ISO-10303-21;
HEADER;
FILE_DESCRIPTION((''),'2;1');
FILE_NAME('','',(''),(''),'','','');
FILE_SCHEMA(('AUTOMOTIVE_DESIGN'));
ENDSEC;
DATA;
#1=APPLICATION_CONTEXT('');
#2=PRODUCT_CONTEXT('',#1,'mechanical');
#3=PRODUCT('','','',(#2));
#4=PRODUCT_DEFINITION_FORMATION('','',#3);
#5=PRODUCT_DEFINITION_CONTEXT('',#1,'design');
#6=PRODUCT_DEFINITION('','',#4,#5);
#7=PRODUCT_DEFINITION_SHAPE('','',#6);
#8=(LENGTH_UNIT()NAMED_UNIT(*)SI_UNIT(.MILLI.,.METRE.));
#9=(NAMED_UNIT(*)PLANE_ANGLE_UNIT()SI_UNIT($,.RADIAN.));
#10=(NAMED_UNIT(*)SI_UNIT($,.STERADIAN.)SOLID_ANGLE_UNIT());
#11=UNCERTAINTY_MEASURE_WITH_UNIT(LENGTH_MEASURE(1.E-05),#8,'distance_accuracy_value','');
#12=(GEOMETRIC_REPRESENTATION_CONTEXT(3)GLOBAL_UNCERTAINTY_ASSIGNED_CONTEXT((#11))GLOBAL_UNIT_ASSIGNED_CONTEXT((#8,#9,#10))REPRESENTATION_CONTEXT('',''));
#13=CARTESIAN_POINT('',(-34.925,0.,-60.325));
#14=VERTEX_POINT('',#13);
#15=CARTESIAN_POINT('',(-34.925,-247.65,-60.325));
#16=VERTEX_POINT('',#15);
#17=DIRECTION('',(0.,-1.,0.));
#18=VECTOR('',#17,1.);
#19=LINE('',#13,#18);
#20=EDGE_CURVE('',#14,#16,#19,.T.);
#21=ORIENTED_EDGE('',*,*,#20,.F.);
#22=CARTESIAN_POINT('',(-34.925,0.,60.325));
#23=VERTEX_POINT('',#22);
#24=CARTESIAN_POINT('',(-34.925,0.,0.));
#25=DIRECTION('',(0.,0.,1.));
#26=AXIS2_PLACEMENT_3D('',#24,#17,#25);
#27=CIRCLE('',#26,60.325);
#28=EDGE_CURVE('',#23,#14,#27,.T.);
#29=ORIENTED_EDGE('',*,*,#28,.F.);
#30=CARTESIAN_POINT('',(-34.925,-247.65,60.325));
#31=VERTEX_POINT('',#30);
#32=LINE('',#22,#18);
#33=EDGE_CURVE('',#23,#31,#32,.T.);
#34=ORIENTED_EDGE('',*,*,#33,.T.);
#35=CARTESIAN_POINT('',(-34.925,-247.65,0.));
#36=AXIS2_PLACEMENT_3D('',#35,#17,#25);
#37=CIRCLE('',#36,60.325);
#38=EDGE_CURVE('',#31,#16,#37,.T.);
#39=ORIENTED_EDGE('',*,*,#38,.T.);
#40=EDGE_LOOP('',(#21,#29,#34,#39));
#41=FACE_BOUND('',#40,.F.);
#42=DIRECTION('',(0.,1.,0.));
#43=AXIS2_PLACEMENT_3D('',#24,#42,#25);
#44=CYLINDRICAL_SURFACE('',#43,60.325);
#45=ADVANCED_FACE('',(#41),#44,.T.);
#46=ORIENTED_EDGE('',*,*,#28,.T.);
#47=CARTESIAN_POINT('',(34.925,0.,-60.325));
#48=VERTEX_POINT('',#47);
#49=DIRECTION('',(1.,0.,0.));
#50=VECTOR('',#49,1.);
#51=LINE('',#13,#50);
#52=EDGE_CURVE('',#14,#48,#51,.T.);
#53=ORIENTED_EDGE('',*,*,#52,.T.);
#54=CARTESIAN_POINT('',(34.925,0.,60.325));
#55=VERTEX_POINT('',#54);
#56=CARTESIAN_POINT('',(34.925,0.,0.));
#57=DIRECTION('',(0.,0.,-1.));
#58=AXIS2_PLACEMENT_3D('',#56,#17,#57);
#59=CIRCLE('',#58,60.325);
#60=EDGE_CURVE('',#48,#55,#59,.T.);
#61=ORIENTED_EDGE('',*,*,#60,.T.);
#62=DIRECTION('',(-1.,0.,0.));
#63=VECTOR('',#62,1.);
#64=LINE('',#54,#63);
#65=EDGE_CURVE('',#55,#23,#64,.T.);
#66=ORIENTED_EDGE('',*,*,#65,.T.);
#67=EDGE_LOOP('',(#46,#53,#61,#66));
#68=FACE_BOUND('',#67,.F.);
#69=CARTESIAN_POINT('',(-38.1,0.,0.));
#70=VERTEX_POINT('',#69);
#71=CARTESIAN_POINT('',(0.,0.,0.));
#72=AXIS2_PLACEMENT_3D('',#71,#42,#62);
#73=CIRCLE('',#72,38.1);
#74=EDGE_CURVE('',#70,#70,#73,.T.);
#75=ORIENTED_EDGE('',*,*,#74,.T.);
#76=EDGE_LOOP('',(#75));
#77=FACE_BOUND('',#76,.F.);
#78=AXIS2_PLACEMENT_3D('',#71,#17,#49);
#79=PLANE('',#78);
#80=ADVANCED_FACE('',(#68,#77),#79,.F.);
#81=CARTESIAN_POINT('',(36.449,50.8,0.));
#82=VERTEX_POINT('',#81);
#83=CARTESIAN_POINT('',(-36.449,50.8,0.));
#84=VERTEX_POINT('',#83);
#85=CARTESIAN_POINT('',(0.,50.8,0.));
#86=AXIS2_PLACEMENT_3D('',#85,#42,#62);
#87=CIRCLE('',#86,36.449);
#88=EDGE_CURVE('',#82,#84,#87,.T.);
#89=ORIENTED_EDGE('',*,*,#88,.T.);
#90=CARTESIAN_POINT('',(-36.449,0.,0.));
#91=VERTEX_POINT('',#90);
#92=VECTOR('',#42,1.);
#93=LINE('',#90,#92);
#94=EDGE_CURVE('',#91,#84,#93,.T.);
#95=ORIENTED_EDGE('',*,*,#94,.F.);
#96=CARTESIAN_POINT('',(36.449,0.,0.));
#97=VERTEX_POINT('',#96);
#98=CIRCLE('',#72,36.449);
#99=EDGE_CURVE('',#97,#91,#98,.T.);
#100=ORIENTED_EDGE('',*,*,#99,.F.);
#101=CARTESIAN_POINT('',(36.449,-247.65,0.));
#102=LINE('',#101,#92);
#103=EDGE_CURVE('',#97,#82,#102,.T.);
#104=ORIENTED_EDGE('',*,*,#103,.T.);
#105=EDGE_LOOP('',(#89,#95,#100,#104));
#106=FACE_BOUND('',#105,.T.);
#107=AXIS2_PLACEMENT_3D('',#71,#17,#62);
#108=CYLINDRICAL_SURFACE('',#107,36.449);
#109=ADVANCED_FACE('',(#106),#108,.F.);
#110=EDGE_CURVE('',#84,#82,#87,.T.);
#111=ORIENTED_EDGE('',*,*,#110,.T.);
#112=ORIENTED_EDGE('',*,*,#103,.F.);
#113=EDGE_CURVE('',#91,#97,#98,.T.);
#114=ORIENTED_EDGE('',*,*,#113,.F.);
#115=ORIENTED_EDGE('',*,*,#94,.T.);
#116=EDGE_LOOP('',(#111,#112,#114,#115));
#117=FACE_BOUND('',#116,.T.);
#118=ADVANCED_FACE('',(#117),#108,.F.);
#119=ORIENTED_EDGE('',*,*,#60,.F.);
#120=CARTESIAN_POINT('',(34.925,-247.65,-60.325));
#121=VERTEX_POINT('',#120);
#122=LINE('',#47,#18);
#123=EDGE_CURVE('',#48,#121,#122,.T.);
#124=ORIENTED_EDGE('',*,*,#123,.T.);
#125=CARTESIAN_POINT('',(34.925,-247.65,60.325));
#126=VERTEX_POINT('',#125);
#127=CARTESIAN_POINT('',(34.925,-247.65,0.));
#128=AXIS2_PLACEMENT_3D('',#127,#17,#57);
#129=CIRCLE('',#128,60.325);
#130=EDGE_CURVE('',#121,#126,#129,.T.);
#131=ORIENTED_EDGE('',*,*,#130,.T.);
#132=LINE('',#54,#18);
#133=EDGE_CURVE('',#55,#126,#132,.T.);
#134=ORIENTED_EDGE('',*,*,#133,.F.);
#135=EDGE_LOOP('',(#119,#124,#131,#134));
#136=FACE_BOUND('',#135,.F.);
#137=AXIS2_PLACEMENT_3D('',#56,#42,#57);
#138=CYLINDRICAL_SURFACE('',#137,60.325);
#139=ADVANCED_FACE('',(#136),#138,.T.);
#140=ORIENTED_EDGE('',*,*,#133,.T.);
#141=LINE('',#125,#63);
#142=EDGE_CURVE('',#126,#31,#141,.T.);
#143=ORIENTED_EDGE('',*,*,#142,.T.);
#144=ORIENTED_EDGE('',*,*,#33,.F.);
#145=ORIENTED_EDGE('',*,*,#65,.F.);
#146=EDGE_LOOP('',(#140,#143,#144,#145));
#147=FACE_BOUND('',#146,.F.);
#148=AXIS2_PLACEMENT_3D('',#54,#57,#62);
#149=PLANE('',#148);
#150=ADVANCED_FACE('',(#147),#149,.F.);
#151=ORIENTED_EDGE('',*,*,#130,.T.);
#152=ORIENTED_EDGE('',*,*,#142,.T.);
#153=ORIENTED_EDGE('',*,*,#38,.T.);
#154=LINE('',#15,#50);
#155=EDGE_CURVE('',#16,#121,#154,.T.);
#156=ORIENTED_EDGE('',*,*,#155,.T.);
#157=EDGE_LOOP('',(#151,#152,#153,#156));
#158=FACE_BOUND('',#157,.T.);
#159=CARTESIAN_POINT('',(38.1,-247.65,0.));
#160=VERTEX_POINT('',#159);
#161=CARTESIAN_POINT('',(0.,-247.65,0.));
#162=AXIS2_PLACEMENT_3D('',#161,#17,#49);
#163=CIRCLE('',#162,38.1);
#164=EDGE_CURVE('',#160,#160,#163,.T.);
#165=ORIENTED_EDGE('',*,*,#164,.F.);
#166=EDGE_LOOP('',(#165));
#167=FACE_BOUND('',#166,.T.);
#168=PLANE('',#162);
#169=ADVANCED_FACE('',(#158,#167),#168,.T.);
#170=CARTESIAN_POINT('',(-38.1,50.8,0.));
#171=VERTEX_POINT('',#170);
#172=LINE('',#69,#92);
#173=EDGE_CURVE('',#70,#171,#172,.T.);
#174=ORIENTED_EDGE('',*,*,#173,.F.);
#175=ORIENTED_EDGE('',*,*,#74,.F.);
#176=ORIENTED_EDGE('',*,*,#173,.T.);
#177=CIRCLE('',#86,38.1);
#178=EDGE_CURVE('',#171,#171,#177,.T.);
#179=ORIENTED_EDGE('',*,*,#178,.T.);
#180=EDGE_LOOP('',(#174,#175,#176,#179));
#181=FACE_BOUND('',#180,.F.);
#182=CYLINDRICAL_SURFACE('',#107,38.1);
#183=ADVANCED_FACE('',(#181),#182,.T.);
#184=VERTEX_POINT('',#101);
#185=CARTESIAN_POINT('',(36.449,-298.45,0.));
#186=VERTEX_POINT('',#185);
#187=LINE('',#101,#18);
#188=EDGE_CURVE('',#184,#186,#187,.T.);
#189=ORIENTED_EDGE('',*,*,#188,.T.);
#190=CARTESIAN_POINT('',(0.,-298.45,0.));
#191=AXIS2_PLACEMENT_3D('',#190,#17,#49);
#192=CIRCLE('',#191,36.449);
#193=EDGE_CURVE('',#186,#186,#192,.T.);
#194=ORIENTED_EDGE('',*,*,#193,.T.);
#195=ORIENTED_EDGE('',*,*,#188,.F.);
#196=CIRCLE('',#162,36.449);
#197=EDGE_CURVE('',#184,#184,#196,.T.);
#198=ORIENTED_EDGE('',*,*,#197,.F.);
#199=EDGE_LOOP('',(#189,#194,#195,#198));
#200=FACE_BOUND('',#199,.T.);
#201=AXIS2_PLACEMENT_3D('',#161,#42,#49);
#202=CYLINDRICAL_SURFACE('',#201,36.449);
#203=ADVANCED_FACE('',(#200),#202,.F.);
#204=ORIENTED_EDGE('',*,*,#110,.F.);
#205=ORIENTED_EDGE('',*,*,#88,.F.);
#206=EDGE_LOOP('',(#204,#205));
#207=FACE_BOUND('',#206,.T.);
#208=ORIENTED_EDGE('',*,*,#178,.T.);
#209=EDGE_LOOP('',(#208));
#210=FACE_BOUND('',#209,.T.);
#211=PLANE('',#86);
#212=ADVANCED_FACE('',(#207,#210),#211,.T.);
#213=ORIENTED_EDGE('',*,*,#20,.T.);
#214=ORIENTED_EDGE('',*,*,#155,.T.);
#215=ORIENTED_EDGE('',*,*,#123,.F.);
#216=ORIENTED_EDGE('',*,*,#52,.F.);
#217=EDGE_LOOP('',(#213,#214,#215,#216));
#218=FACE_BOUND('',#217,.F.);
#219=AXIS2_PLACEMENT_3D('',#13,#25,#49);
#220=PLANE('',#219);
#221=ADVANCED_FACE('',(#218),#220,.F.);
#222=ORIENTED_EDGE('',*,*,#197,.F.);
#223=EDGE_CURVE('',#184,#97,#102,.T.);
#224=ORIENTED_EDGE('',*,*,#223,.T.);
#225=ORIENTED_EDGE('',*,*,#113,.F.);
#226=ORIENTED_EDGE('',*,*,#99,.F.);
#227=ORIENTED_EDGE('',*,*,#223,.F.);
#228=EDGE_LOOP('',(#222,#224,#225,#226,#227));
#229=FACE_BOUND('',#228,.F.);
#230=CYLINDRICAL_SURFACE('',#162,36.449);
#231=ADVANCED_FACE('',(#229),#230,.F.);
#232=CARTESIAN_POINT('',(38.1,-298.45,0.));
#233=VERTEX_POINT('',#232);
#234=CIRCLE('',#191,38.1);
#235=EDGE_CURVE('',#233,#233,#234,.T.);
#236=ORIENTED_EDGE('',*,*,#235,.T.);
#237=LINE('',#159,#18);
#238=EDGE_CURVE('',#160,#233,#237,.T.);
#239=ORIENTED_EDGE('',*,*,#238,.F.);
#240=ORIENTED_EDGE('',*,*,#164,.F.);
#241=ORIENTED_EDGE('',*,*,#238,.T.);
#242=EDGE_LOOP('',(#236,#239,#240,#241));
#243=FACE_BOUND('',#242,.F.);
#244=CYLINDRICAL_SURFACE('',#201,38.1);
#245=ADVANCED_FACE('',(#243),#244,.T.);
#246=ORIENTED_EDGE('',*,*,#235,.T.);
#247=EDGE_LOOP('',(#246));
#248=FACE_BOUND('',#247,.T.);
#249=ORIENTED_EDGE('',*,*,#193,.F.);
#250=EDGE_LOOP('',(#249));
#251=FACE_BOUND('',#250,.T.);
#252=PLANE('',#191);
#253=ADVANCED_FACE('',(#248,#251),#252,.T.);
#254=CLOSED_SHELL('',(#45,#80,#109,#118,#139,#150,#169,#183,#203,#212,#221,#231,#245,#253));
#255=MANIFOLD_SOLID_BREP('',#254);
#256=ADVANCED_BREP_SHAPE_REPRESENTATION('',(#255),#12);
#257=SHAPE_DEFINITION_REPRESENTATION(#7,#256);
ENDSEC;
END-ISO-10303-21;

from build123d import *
from build123d import SkipClean  # not in build123d's __all__

# Parameters (mm, degrees)
F1_DEPTH = 247.65
F2_R     = 38.1
F2_R_2   = 36.449
F3_DEPTH = 50.8
F4_R     = 38.1
F4_R_2   = 36.449
F5_DEPTH = 50.8
F6_DEPTH = 330.2


with BuildPart() as f1:
    # F0 (on Front) → F1 (new body)
    with BuildSketch(Plane.XZ):
        with BuildLine():
            Line((34.925, 60.325), (-34.925, 60.325))
            ThreePointArc((-34.925, 60.325), (-95.25, 0), (-34.925, -60.325))
            Line((-34.925, -60.325), (34.925, -60.325))
            ThreePointArc((34.925, -60.325), (95.25, 0), (34.925, 60.325))
        make_face()
    extrude(amount=F1_DEPTH)

    # F2 (on face) → F3 (join)
    with BuildSketch(Plane.XZ.offset(247.65)):
        Circle(F2_R)
        Circle(F2_R_2, mode=Mode.SUBTRACT)
    extrude(amount=F3_DEPTH)

    # F4 (on face) → F5 (join)
    with BuildSketch(Plane(origin=(0, 0, 0), x_dir=(-1, 0, 0), z_dir=(0, 1, 0))):
        Circle(F4_R)
        Circle(F4_R_2, mode=Mode.SUBTRACT)
    extrude(amount=F5_DEPTH)

    # F6 (cut): a face of the model
    f6_faces = [f1.faces().sort_by_distance(p)[0] for p in [
        (0, -247.65, 0),
    ]]
    with SkipClean():  # cleaning this boolean's faces spoils the solid; the shape is the same uncleaned
        extrude(f6_faces, amount=-F6_DEPTH, mode=Mode.SUBTRACT)


solid = f1.part
